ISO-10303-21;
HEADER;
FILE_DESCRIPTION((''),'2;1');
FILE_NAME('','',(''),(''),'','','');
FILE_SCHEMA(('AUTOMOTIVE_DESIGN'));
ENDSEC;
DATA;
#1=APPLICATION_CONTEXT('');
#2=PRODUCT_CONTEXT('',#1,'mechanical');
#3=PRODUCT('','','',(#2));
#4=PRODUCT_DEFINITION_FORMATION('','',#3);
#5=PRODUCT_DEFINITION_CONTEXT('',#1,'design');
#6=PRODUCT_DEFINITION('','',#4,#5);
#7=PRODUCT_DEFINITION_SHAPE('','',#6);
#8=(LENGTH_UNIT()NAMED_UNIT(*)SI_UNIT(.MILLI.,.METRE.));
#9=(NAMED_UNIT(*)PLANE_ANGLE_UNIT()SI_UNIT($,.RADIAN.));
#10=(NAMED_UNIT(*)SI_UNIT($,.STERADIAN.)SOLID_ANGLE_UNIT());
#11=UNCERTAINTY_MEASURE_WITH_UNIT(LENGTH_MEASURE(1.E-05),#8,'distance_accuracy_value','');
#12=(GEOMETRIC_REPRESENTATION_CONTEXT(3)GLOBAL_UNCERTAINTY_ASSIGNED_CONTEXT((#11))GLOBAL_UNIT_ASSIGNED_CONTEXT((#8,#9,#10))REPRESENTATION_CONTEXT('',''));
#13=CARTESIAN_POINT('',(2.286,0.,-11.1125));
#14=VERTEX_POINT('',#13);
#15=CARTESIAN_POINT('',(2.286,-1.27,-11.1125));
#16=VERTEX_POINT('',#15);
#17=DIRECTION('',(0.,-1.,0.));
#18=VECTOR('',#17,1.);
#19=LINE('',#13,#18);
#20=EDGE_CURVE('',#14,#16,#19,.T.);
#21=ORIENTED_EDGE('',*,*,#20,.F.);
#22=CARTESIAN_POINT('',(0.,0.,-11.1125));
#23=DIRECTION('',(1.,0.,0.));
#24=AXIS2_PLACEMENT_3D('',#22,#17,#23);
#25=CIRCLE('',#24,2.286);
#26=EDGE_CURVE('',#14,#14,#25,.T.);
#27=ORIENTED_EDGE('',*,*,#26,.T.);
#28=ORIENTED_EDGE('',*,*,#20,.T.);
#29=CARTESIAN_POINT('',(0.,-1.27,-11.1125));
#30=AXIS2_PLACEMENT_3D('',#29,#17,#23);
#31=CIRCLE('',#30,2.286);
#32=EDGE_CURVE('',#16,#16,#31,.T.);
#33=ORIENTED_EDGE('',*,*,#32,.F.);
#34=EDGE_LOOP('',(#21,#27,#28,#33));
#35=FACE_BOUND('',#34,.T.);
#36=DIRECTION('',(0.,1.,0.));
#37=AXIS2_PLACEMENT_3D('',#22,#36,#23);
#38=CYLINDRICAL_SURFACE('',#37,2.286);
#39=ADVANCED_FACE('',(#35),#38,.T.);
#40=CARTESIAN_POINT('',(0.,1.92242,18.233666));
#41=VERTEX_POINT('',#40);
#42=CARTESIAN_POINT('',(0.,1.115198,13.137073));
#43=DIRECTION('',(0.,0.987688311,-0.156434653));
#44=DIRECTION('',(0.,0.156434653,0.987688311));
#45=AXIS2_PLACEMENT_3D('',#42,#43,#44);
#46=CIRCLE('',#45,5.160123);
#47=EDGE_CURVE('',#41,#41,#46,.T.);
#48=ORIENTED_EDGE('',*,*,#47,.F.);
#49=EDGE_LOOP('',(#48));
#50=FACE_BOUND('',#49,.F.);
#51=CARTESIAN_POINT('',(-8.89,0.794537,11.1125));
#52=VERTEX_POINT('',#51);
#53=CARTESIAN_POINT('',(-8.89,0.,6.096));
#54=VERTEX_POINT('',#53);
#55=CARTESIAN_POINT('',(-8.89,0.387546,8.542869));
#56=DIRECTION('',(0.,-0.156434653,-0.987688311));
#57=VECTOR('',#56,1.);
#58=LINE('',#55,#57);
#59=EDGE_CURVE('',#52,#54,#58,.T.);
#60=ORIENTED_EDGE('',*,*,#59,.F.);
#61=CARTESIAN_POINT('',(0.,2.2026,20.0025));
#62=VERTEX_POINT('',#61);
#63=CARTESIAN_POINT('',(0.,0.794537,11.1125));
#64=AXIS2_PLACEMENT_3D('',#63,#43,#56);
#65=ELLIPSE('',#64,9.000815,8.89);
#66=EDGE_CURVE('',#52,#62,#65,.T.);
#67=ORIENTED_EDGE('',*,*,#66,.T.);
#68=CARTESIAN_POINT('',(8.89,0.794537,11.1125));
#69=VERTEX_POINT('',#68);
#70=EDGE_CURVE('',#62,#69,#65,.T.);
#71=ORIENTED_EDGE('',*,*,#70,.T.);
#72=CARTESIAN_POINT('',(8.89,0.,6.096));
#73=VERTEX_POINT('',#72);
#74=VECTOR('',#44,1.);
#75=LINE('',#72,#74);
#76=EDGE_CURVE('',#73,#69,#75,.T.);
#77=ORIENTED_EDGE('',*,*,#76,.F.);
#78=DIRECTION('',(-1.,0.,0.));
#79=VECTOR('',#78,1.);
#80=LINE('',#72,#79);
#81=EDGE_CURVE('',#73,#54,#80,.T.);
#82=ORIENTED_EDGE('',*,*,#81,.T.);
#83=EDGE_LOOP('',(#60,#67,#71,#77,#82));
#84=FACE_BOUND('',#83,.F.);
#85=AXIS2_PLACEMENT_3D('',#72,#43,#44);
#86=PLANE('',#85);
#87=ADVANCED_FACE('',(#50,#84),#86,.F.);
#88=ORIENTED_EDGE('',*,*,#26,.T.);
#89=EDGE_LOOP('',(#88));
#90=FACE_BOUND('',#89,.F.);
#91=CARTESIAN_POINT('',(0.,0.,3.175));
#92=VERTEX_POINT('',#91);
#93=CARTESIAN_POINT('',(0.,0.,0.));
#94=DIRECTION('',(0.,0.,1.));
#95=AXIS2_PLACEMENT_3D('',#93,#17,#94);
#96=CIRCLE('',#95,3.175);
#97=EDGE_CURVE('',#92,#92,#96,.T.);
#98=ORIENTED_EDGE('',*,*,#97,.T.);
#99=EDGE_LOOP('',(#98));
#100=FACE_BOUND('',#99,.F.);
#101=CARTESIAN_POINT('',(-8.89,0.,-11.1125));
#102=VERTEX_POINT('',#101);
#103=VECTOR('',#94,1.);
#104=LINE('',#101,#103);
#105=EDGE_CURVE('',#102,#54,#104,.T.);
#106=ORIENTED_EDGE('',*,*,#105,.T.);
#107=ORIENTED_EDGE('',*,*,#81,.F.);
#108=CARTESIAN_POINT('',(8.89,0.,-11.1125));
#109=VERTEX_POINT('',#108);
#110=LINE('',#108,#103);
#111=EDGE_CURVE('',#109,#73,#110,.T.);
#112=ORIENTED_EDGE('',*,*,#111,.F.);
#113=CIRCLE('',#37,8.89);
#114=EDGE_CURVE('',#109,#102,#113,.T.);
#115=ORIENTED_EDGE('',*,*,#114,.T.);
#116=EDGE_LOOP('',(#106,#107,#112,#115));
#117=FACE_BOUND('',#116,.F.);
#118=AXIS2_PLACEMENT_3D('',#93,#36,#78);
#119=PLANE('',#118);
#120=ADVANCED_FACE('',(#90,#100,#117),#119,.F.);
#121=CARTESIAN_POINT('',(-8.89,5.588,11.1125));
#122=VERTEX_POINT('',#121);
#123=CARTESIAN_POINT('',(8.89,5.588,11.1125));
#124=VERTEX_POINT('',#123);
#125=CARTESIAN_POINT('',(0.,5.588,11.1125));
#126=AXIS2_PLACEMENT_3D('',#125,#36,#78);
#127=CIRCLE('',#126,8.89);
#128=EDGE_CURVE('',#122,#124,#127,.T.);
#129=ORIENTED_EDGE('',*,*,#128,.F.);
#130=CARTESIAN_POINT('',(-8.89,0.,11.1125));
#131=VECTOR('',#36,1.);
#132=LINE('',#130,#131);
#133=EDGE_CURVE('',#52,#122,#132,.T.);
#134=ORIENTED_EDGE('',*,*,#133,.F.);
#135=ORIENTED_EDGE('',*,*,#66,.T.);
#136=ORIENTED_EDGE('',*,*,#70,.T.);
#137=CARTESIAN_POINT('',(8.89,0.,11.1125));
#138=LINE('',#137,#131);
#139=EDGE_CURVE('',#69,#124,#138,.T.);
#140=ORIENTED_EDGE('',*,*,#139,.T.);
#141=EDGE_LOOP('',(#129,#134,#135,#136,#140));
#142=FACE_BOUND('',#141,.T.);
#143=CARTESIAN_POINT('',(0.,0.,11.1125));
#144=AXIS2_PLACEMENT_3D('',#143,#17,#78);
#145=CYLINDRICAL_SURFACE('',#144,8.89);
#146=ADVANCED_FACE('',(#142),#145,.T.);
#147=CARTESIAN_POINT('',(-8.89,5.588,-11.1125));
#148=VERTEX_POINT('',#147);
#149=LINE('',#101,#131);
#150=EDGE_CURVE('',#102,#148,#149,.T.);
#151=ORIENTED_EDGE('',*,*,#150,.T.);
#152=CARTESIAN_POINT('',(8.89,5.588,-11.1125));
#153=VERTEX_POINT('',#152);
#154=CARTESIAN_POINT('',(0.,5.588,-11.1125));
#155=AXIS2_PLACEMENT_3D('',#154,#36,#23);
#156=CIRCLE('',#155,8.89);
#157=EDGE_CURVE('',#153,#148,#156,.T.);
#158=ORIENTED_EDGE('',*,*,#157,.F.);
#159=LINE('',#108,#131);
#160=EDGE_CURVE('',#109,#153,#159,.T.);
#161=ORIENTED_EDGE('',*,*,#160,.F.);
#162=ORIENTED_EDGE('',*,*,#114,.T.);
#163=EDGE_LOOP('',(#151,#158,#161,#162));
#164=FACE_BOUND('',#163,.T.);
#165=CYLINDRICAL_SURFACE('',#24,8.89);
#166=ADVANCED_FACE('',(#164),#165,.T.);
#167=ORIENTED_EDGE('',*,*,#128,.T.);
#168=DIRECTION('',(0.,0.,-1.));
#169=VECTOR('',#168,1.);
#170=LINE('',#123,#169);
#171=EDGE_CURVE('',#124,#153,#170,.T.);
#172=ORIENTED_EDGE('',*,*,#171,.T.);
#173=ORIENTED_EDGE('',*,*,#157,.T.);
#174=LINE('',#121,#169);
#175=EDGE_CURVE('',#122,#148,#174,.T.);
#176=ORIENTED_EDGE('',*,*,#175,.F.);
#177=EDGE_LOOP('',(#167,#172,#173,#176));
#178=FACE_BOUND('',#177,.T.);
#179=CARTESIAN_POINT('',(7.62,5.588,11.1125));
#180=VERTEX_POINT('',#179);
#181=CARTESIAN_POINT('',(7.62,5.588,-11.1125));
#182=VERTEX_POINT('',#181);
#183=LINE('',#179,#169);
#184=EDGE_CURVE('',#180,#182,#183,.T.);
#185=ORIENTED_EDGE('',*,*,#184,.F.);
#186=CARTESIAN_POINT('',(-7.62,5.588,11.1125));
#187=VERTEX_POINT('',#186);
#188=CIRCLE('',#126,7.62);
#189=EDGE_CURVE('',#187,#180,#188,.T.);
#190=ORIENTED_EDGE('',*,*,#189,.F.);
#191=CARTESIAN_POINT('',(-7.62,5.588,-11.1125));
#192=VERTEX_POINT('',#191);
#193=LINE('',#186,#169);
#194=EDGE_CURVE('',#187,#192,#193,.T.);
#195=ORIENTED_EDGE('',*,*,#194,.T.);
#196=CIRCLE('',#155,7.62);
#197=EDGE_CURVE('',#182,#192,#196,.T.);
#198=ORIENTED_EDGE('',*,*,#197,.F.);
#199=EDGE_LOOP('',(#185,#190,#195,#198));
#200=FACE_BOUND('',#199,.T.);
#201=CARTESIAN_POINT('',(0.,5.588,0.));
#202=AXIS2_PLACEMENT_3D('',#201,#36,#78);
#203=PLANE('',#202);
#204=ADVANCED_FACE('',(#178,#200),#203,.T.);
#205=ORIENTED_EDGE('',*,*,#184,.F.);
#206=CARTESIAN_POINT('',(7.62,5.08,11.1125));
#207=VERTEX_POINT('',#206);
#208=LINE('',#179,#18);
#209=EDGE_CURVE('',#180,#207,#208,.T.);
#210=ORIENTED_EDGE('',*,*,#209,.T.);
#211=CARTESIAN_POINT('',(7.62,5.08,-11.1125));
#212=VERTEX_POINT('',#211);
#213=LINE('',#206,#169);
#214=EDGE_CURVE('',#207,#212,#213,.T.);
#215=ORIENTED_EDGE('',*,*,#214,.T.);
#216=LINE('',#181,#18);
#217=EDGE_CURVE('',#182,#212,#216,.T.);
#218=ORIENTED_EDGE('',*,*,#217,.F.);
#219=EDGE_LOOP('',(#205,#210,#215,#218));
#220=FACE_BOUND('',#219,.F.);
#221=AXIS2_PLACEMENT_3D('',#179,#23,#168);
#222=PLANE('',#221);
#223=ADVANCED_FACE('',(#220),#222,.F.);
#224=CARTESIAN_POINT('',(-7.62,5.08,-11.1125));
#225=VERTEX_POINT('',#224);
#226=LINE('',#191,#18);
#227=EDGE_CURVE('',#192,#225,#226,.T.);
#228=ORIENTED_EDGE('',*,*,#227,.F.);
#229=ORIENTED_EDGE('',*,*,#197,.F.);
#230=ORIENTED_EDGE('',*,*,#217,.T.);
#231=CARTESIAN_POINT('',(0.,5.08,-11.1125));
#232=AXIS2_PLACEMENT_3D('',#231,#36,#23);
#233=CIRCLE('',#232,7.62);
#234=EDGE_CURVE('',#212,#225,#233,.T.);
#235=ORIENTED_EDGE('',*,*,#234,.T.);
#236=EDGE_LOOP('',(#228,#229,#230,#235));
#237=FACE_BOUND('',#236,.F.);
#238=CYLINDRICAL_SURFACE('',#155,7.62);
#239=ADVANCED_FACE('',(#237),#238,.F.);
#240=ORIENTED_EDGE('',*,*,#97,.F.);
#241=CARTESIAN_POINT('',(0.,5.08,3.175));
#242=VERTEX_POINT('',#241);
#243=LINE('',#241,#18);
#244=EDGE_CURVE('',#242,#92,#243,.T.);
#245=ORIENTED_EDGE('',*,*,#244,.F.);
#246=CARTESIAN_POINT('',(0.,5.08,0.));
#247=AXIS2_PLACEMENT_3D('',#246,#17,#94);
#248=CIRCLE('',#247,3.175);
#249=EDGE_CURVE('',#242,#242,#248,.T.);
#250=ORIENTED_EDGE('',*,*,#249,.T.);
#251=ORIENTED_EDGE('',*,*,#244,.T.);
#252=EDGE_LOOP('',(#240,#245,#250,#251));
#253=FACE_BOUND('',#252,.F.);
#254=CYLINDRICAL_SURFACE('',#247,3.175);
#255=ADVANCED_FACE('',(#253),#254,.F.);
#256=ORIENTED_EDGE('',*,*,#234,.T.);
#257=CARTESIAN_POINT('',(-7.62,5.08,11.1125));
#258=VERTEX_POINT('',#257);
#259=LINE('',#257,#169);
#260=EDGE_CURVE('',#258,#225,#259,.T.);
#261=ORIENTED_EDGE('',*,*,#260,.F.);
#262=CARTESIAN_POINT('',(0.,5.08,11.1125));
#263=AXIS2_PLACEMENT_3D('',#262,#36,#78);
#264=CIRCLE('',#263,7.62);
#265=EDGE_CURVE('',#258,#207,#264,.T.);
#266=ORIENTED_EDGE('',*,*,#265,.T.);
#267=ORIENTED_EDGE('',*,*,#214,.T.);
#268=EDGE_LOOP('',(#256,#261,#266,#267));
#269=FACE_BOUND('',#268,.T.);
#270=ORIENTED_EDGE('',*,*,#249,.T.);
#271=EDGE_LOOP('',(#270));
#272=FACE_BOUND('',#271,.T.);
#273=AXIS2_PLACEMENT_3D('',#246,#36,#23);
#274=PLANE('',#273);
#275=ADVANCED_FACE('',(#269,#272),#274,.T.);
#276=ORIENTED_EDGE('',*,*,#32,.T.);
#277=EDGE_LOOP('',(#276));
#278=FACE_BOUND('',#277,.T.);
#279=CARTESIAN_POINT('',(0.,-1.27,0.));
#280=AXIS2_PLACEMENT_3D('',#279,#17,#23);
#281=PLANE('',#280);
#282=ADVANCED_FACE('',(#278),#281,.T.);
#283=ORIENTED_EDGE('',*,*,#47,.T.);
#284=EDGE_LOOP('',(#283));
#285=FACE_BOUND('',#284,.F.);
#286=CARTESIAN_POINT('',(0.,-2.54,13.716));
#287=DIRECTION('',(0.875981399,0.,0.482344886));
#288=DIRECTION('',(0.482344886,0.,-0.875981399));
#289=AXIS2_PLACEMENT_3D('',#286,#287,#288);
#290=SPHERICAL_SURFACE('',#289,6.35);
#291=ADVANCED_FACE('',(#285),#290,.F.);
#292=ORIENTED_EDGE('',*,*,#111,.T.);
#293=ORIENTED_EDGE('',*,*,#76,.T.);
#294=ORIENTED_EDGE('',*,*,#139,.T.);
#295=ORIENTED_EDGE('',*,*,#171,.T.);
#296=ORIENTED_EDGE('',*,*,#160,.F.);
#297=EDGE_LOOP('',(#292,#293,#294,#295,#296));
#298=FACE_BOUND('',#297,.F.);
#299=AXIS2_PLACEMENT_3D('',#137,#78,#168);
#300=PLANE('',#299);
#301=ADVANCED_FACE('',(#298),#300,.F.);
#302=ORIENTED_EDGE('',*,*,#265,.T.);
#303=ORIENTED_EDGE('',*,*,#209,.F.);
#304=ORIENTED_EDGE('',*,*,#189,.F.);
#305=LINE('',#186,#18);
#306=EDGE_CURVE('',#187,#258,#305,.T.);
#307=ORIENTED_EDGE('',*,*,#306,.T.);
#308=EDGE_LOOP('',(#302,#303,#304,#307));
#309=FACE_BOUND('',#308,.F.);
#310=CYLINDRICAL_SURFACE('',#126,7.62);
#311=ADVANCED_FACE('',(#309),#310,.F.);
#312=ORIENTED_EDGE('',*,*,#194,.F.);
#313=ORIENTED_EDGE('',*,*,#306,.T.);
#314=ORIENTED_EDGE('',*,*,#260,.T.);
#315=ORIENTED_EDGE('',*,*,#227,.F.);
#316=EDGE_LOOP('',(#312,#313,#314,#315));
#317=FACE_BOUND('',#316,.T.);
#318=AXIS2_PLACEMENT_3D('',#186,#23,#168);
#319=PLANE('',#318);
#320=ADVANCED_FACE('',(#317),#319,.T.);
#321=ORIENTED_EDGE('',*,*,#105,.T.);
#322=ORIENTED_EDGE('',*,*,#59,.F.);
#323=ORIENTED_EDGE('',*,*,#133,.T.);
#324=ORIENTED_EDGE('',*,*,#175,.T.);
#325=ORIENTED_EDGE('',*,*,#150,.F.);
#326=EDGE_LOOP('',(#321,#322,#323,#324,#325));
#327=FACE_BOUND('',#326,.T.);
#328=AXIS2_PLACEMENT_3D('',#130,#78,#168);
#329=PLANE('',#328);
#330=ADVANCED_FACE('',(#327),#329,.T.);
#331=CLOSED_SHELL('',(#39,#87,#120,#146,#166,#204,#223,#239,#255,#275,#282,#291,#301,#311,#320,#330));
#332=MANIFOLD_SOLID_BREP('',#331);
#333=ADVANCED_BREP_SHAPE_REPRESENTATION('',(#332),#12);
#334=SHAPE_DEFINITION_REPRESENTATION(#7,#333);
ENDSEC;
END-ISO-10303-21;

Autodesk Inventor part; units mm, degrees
ref_plane "YZ Plane" through (0, 0, 0) normal (1, 0, 0) x (0, 1, 0)
ref_plane "XZ Plane" through (0, 0, 0) normal (0, 1, 0) x (-1, 0, 0)
sketch "Sketch1" plane through (0, 0, 0) normal (0, 1, 0) x (-1, 0, 0)
  arc A0 (8.89, 11.1125) -> (-8.89, 11.1125) centre (0, 11.1125) ccw
  line L0 (-8.89, 0) -> (8.89, 0)
  arc A1 (-8.89, -11.1125) -> (8.89, -11.1125) centre (0, -11.1125) ccw
  line L1 (8.89, 11.1125) -> (8.89, -11.1125)
  line L2 (-8.89, 11.1125) -> (-8.89, -11.1125)
  point P0 (0, 0)
extrude "Extrusion1" add sketch "Sketch1" along normal blind 5.588
sketch "Sketch2" plane through (0, 5.588, 0) normal (0, 1, 0) x (1, 0, 0)
  arc A0 (-7.62, -11.1125) -> (7.62, -11.1125) centre (0, -11.1125) ccw
  arc A1 (7.62, 11.1125) -> (-7.62, 11.1125) centre (0, 11.1125) ccw
  line L0 (-7.62, -11.1125) -> (-7.62, 11.1125)
  line L1 (7.62, -11.1125) -> (7.62, 11.1125)
  line L2 (8.89, -11.1125) -> (8.89, 11.1125) projected
  line L3 (-8.89, 11.1125) -> (-8.89, -11.1125) projected
  arc A2 (-8.89, -11.1125) -> (8.89, -11.1125) centre (0, -11.1125) ccw projected
  point P0 (0, 0)
  dimension "d32" = 1.27
  dimension "d33" = 1.27
  dimension "d34" = 1.27
  dimension "d36" = 22.225
  dimension "d37" = 22.225
  dimension "d38" = 22.225
extrude "Extrusion2" cut sketch "Sketch2" against normal blind 0.508
sketch "Sketch3" plane through (0, 5.08, 0) normal (0, 1, 0) x (1, 0, 0)
  circle A0 centre (0, 0) radius 3.175
  point P0 (0, 0)
  dimension "d10" = 6.35
hole "Hole1" at (0, 5.08, 0) direction (0, -1, 0) diameter 6.35 end through all
thread "Thread1" size "1/4-20 UNC" class "1B" standard "ANSI Unified Screw Threads" full length
sketch "Sketch4" plane through (8.89, 0, 11.1125) normal (1, 0, 0) x (0, 0, -1)
  line L0 (5.0165, 0) -> (-12.6241, 2.794)
  line L1 (-12.6241, 2.794) -> (-8.89, 2.2026)
  line L2 (-8.89, 0) -> (-8.89, 5.588) projected
  line L3 (-8.89, 2.2026) -> (-8.89, 0)
  line L4 (5.0165, 0) -> (-8.89, 0)
  line L5 (-8.89, 2.2026) -> (5.0165, 0)
  point P0 (11.1125, 0)
  dimension "d29" = 9
  dimension "d30" = 6.096
extrude "Extrusion3" cut sketch "Sketch4" against normal through all
ref_plane "Work Plane1" through (0, -2.54, 0) normal (0, -1, 0) x (1, 0, 0)
sketch "Sketch5" plane through (0, -2.54, 0) normal (0, -1, 0) x (1, 0, 0)
  circle A0 centre (0, 13.716) radius 6.35
  line L0 (-5.5625, 10.6531) -> (5.5625, 16.7789)
  point P0 (0, 0)
  dimension "d23" = 12.7
  dimension "d31" = 13.716
revolve "Revolution1" cut sketch "Sketch5" angle 360 about axis through (-5.5625, -2.54, 10.6531) along (0.8759844, 0, 0.4823395) picked at (2.4961, 12.478) contours A0 L0
sketch "Sketch6" plane through (0, 0, 0) normal (0, -1, 0) x (1, 0, 0)
  circle A0 centre (0, -11.1125) radius 2.286
  point P0 (0, 0)
  dimension "d25" = 4.572
  dimension "d26" = 11.1125
extrude "Extrusion4" add sketch "Sketch6" along normal blind 1.27
properties part number "Lopez_LeftClamp" material "Polypropylene"
